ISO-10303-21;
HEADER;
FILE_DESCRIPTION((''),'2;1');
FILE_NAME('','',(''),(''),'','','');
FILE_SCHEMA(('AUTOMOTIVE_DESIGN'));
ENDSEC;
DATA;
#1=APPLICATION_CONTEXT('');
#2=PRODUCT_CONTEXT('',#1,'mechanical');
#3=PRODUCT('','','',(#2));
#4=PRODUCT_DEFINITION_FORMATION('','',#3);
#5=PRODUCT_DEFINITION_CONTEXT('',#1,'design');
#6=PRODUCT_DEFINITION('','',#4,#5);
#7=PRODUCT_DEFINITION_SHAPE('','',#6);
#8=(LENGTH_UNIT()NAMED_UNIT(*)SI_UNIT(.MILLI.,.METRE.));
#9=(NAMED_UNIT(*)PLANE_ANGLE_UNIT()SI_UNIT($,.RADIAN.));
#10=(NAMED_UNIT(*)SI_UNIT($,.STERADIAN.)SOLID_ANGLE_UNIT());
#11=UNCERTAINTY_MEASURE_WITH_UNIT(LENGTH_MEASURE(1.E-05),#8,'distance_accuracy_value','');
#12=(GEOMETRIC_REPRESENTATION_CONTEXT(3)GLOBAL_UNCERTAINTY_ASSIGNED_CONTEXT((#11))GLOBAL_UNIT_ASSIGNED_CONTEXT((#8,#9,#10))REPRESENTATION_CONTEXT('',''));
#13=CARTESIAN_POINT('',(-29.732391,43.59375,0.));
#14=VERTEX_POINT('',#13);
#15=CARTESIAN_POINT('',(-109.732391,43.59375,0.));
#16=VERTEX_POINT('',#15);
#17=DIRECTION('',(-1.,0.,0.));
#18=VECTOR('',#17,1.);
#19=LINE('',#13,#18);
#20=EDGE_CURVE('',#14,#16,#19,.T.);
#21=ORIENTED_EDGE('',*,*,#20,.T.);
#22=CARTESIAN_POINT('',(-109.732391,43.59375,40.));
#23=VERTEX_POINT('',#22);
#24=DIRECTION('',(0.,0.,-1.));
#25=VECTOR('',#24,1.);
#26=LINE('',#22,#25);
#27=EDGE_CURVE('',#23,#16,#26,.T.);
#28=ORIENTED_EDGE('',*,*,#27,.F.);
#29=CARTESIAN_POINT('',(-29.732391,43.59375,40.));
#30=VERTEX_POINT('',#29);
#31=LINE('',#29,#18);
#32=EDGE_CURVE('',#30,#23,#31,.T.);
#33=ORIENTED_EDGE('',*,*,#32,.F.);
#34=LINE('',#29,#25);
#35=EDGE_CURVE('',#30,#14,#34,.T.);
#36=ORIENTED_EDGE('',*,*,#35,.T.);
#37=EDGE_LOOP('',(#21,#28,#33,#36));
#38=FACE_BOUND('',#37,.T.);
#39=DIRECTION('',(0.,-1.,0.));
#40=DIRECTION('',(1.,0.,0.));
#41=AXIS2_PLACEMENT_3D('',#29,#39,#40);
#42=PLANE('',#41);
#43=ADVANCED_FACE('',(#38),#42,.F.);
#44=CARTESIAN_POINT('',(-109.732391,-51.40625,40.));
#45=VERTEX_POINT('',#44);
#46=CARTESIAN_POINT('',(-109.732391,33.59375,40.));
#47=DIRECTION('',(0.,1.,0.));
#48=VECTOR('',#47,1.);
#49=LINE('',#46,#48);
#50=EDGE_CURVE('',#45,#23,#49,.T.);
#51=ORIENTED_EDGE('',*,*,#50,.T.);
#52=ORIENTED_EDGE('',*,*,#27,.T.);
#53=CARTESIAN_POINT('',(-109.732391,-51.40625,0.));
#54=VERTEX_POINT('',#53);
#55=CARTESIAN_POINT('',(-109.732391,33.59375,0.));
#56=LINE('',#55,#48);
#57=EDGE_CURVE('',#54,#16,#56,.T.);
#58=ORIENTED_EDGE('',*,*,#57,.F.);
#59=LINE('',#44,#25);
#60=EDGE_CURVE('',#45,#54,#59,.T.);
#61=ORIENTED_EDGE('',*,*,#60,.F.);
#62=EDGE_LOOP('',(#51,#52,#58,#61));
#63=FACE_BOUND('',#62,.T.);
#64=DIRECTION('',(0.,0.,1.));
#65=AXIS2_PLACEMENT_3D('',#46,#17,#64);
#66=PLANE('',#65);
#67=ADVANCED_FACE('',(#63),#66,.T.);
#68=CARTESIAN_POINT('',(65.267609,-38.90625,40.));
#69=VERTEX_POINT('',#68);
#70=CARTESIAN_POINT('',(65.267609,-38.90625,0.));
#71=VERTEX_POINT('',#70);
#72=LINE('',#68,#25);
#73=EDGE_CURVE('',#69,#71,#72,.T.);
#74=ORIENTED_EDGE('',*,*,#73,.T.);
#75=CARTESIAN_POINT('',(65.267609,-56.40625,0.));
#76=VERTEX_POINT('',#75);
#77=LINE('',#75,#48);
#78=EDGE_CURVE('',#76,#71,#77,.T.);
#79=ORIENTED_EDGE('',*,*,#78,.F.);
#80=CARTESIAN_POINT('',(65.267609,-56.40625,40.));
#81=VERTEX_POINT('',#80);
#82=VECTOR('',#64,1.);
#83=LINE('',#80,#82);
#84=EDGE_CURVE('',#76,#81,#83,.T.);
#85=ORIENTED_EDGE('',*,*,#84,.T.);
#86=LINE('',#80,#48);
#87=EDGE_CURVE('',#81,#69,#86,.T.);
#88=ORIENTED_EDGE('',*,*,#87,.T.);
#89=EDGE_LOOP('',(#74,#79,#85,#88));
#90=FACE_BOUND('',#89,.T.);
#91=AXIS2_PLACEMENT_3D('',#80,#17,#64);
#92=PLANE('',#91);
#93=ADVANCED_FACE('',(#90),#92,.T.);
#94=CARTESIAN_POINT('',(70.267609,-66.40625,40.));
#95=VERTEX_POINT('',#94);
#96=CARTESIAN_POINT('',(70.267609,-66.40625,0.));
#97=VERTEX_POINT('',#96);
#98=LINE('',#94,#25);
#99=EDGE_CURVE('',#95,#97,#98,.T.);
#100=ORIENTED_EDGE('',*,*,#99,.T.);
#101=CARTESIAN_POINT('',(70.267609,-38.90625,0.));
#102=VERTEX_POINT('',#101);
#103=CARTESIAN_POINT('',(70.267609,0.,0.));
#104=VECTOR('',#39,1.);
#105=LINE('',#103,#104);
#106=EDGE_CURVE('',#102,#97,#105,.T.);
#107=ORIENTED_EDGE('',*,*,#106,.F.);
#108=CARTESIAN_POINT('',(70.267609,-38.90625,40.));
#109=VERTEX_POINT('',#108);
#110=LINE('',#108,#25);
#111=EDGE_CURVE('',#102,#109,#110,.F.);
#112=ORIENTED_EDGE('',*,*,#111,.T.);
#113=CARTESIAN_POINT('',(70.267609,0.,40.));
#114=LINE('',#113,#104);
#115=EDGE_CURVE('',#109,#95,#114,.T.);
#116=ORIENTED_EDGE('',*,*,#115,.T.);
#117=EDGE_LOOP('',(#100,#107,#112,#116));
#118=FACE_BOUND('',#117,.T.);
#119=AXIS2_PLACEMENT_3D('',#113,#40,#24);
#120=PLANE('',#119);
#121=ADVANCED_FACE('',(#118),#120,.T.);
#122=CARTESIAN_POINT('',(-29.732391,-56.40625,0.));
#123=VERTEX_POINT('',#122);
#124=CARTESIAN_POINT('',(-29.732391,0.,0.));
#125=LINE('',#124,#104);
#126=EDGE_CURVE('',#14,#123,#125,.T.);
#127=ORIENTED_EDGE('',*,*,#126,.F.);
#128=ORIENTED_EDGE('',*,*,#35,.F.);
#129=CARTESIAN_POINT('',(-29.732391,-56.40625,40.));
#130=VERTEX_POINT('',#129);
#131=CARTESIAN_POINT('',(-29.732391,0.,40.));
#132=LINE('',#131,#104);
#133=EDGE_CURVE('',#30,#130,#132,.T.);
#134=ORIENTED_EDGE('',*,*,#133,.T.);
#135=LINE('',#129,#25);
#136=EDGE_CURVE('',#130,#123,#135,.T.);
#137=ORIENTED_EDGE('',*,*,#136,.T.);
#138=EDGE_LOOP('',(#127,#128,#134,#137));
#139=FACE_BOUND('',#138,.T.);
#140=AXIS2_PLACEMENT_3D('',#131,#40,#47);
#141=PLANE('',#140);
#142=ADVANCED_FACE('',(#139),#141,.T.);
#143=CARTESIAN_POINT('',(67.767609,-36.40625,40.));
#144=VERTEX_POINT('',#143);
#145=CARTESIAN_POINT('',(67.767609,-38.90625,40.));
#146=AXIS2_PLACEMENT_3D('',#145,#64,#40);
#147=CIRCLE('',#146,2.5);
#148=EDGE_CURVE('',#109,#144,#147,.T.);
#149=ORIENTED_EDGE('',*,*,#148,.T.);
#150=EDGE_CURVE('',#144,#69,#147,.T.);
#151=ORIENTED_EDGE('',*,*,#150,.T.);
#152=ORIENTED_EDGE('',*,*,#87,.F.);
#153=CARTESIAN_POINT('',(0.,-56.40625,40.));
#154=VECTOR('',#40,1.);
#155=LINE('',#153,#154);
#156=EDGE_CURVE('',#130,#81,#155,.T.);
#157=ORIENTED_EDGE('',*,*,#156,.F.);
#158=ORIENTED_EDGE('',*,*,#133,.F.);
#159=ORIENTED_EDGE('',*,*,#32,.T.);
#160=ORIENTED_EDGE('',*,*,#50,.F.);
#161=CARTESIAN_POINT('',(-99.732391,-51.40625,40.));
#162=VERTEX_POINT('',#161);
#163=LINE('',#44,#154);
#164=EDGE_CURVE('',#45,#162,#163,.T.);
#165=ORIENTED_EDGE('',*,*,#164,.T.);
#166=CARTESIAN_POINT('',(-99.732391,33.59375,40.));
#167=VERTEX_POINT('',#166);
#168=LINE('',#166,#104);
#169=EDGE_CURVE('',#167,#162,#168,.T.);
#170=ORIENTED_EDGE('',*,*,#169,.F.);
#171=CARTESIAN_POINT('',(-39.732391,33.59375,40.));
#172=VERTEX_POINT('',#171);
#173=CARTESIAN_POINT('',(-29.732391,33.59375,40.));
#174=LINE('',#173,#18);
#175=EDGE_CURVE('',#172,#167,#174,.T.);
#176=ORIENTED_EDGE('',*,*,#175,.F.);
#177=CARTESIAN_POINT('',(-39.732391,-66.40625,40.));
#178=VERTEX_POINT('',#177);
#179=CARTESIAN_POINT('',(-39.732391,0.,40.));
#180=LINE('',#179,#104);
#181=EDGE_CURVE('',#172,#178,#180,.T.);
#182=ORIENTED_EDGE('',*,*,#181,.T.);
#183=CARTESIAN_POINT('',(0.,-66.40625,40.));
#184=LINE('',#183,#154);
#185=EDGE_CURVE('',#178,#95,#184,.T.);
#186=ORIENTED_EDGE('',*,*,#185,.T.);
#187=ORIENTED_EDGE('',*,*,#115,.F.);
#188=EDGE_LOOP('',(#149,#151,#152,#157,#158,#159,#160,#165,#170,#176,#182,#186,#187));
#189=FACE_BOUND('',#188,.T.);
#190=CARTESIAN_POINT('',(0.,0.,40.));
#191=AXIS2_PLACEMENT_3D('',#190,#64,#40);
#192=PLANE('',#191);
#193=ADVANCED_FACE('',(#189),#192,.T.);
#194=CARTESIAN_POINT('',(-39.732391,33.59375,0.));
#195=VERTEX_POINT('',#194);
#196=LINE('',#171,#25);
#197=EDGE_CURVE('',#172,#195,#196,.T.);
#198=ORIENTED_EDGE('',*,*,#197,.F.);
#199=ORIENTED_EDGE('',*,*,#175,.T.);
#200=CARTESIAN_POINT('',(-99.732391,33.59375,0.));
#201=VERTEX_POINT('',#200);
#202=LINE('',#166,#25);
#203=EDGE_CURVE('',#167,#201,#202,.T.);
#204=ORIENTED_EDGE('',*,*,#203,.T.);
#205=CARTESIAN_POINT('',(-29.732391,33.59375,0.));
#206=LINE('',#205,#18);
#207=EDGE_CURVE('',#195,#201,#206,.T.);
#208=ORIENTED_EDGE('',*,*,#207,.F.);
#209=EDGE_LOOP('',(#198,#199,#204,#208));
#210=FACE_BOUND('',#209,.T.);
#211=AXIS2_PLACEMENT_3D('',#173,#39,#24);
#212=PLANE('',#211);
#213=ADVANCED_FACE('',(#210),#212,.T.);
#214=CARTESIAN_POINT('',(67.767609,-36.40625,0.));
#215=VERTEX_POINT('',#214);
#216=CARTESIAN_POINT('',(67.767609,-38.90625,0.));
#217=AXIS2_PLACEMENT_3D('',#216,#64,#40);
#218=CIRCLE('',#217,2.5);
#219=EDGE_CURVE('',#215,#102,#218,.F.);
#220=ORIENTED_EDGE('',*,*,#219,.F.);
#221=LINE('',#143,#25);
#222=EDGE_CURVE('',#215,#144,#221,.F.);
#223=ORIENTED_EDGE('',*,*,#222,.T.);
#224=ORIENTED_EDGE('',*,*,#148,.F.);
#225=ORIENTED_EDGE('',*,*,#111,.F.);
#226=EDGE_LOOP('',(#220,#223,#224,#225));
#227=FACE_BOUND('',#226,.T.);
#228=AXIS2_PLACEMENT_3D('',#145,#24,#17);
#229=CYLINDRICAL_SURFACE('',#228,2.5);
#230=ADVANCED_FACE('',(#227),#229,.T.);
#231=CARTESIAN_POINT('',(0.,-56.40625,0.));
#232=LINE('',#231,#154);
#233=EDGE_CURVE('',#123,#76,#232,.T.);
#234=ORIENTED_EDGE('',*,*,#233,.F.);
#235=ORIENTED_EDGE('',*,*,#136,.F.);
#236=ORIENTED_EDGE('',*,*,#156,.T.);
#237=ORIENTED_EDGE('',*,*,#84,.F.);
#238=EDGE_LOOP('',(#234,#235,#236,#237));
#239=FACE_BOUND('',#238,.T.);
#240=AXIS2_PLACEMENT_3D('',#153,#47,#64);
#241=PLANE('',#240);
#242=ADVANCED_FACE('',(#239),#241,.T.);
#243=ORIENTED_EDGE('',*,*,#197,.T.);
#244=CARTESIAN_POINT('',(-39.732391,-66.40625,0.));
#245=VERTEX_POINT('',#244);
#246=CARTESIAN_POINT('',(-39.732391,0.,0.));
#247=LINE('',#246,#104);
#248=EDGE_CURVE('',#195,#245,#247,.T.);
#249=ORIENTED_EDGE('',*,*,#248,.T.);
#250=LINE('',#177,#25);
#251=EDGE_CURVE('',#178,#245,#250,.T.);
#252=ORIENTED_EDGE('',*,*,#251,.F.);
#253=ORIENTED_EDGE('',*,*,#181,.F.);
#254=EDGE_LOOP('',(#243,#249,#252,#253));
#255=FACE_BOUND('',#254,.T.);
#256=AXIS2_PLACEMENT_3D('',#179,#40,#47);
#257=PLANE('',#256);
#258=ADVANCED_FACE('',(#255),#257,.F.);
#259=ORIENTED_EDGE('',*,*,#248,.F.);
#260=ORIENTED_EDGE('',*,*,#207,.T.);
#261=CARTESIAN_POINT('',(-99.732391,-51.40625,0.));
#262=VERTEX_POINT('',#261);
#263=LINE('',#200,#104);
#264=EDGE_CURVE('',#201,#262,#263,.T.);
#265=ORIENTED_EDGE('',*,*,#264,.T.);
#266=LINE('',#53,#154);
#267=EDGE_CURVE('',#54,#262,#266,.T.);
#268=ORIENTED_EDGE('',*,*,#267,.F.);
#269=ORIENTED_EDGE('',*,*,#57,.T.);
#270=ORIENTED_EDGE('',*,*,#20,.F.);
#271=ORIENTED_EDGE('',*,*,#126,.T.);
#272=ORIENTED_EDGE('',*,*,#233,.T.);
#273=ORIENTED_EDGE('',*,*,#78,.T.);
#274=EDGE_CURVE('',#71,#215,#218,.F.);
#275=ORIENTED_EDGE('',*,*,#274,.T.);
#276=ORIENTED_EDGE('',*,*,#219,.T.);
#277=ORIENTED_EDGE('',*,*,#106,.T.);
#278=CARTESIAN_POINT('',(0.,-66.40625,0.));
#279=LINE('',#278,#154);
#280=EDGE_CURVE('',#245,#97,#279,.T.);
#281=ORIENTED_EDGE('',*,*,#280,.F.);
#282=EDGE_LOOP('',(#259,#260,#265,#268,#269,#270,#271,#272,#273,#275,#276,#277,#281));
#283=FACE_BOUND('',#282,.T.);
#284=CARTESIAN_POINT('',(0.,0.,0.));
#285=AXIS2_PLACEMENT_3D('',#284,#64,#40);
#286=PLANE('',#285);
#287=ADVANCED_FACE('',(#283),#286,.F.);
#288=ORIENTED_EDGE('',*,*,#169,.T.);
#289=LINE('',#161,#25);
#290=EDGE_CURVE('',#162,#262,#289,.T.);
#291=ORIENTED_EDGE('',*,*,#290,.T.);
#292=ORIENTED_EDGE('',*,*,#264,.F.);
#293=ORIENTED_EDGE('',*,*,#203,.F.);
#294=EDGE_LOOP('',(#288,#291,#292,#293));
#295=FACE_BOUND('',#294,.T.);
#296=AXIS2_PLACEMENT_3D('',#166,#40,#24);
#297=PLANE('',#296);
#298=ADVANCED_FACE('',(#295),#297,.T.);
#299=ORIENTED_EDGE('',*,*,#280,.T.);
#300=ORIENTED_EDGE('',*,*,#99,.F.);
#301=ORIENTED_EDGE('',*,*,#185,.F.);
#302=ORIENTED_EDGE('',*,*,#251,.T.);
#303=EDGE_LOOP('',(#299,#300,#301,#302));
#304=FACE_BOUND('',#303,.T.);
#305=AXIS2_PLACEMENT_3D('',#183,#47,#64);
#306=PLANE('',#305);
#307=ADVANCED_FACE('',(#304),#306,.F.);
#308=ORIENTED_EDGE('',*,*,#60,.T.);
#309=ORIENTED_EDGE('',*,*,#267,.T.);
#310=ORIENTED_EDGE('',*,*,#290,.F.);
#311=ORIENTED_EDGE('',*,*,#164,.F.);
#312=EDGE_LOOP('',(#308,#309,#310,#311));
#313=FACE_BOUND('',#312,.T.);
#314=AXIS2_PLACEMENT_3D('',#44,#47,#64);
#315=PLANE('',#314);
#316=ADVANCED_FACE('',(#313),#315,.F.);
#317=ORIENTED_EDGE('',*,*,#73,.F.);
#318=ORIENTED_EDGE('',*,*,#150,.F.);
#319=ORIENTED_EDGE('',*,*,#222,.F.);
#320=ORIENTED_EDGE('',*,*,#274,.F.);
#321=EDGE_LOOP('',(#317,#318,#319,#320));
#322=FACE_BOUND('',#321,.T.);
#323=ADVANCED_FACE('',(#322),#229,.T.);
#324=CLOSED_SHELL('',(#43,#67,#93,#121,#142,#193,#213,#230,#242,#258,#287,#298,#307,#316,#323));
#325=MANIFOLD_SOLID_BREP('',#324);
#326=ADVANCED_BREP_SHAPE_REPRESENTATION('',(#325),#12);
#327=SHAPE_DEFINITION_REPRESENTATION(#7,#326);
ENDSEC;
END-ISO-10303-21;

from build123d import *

# Parameters (mm, degrees)
SKETCH_1_W      = 10
SKETCH_1_H      = 90
SKETCH_1_W_2    = 80
SKETCH_1_H_2    = 10
SKETCH_1_W_3    = 5
SKETCH_1_H_3    = 20
SKETCH_1_H_4    = 85
EXTRUDE_1_DEPTH = 40
FILLET_1_R      = 2.5


with BuildPart() as part:
    # 草圖1 → 填料-伸長1 (new body)
    with BuildSketch(Plane.XY):
        with Locations((-34.732391425, -11.40625)):
            Rectangle(SKETCH_1_W, SKETCH_1_H)
        Polygon((-29.732391425, -56.40625), (-39.732391425, -56.40625), (-39.732391425, -66.40625), (70.267608575, -66.40625), (70.267608575, -56.40625), (65.267608575, -56.40625), align=None)
        with Locations((-69.732391425, 38.59375)):
            Rectangle(SKETCH_1_W_2, SKETCH_1_H_2)
        with Locations((67.767608575, -46.40625)):
            Rectangle(SKETCH_1_W_3, SKETCH_1_H_3)
        with Locations((-104.732391425, -8.90625)):
            Rectangle(SKETCH_1_W, SKETCH_1_H_4)
    extrude(amount=EXTRUDE_1_DEPTH)

    # 圓角1
    fillet_1_edges = [part.edges().sort_by_distance(p)[0] for p in [
        (70.267608575, -36.40625, 20),
        (65.267608575, -36.40625, 20),
    ]]
    fillet(fillet_1_edges, radius=FILLET_1_R - 0.0001)  # a hair under: the kernel refuses the full size


solid = part.part
